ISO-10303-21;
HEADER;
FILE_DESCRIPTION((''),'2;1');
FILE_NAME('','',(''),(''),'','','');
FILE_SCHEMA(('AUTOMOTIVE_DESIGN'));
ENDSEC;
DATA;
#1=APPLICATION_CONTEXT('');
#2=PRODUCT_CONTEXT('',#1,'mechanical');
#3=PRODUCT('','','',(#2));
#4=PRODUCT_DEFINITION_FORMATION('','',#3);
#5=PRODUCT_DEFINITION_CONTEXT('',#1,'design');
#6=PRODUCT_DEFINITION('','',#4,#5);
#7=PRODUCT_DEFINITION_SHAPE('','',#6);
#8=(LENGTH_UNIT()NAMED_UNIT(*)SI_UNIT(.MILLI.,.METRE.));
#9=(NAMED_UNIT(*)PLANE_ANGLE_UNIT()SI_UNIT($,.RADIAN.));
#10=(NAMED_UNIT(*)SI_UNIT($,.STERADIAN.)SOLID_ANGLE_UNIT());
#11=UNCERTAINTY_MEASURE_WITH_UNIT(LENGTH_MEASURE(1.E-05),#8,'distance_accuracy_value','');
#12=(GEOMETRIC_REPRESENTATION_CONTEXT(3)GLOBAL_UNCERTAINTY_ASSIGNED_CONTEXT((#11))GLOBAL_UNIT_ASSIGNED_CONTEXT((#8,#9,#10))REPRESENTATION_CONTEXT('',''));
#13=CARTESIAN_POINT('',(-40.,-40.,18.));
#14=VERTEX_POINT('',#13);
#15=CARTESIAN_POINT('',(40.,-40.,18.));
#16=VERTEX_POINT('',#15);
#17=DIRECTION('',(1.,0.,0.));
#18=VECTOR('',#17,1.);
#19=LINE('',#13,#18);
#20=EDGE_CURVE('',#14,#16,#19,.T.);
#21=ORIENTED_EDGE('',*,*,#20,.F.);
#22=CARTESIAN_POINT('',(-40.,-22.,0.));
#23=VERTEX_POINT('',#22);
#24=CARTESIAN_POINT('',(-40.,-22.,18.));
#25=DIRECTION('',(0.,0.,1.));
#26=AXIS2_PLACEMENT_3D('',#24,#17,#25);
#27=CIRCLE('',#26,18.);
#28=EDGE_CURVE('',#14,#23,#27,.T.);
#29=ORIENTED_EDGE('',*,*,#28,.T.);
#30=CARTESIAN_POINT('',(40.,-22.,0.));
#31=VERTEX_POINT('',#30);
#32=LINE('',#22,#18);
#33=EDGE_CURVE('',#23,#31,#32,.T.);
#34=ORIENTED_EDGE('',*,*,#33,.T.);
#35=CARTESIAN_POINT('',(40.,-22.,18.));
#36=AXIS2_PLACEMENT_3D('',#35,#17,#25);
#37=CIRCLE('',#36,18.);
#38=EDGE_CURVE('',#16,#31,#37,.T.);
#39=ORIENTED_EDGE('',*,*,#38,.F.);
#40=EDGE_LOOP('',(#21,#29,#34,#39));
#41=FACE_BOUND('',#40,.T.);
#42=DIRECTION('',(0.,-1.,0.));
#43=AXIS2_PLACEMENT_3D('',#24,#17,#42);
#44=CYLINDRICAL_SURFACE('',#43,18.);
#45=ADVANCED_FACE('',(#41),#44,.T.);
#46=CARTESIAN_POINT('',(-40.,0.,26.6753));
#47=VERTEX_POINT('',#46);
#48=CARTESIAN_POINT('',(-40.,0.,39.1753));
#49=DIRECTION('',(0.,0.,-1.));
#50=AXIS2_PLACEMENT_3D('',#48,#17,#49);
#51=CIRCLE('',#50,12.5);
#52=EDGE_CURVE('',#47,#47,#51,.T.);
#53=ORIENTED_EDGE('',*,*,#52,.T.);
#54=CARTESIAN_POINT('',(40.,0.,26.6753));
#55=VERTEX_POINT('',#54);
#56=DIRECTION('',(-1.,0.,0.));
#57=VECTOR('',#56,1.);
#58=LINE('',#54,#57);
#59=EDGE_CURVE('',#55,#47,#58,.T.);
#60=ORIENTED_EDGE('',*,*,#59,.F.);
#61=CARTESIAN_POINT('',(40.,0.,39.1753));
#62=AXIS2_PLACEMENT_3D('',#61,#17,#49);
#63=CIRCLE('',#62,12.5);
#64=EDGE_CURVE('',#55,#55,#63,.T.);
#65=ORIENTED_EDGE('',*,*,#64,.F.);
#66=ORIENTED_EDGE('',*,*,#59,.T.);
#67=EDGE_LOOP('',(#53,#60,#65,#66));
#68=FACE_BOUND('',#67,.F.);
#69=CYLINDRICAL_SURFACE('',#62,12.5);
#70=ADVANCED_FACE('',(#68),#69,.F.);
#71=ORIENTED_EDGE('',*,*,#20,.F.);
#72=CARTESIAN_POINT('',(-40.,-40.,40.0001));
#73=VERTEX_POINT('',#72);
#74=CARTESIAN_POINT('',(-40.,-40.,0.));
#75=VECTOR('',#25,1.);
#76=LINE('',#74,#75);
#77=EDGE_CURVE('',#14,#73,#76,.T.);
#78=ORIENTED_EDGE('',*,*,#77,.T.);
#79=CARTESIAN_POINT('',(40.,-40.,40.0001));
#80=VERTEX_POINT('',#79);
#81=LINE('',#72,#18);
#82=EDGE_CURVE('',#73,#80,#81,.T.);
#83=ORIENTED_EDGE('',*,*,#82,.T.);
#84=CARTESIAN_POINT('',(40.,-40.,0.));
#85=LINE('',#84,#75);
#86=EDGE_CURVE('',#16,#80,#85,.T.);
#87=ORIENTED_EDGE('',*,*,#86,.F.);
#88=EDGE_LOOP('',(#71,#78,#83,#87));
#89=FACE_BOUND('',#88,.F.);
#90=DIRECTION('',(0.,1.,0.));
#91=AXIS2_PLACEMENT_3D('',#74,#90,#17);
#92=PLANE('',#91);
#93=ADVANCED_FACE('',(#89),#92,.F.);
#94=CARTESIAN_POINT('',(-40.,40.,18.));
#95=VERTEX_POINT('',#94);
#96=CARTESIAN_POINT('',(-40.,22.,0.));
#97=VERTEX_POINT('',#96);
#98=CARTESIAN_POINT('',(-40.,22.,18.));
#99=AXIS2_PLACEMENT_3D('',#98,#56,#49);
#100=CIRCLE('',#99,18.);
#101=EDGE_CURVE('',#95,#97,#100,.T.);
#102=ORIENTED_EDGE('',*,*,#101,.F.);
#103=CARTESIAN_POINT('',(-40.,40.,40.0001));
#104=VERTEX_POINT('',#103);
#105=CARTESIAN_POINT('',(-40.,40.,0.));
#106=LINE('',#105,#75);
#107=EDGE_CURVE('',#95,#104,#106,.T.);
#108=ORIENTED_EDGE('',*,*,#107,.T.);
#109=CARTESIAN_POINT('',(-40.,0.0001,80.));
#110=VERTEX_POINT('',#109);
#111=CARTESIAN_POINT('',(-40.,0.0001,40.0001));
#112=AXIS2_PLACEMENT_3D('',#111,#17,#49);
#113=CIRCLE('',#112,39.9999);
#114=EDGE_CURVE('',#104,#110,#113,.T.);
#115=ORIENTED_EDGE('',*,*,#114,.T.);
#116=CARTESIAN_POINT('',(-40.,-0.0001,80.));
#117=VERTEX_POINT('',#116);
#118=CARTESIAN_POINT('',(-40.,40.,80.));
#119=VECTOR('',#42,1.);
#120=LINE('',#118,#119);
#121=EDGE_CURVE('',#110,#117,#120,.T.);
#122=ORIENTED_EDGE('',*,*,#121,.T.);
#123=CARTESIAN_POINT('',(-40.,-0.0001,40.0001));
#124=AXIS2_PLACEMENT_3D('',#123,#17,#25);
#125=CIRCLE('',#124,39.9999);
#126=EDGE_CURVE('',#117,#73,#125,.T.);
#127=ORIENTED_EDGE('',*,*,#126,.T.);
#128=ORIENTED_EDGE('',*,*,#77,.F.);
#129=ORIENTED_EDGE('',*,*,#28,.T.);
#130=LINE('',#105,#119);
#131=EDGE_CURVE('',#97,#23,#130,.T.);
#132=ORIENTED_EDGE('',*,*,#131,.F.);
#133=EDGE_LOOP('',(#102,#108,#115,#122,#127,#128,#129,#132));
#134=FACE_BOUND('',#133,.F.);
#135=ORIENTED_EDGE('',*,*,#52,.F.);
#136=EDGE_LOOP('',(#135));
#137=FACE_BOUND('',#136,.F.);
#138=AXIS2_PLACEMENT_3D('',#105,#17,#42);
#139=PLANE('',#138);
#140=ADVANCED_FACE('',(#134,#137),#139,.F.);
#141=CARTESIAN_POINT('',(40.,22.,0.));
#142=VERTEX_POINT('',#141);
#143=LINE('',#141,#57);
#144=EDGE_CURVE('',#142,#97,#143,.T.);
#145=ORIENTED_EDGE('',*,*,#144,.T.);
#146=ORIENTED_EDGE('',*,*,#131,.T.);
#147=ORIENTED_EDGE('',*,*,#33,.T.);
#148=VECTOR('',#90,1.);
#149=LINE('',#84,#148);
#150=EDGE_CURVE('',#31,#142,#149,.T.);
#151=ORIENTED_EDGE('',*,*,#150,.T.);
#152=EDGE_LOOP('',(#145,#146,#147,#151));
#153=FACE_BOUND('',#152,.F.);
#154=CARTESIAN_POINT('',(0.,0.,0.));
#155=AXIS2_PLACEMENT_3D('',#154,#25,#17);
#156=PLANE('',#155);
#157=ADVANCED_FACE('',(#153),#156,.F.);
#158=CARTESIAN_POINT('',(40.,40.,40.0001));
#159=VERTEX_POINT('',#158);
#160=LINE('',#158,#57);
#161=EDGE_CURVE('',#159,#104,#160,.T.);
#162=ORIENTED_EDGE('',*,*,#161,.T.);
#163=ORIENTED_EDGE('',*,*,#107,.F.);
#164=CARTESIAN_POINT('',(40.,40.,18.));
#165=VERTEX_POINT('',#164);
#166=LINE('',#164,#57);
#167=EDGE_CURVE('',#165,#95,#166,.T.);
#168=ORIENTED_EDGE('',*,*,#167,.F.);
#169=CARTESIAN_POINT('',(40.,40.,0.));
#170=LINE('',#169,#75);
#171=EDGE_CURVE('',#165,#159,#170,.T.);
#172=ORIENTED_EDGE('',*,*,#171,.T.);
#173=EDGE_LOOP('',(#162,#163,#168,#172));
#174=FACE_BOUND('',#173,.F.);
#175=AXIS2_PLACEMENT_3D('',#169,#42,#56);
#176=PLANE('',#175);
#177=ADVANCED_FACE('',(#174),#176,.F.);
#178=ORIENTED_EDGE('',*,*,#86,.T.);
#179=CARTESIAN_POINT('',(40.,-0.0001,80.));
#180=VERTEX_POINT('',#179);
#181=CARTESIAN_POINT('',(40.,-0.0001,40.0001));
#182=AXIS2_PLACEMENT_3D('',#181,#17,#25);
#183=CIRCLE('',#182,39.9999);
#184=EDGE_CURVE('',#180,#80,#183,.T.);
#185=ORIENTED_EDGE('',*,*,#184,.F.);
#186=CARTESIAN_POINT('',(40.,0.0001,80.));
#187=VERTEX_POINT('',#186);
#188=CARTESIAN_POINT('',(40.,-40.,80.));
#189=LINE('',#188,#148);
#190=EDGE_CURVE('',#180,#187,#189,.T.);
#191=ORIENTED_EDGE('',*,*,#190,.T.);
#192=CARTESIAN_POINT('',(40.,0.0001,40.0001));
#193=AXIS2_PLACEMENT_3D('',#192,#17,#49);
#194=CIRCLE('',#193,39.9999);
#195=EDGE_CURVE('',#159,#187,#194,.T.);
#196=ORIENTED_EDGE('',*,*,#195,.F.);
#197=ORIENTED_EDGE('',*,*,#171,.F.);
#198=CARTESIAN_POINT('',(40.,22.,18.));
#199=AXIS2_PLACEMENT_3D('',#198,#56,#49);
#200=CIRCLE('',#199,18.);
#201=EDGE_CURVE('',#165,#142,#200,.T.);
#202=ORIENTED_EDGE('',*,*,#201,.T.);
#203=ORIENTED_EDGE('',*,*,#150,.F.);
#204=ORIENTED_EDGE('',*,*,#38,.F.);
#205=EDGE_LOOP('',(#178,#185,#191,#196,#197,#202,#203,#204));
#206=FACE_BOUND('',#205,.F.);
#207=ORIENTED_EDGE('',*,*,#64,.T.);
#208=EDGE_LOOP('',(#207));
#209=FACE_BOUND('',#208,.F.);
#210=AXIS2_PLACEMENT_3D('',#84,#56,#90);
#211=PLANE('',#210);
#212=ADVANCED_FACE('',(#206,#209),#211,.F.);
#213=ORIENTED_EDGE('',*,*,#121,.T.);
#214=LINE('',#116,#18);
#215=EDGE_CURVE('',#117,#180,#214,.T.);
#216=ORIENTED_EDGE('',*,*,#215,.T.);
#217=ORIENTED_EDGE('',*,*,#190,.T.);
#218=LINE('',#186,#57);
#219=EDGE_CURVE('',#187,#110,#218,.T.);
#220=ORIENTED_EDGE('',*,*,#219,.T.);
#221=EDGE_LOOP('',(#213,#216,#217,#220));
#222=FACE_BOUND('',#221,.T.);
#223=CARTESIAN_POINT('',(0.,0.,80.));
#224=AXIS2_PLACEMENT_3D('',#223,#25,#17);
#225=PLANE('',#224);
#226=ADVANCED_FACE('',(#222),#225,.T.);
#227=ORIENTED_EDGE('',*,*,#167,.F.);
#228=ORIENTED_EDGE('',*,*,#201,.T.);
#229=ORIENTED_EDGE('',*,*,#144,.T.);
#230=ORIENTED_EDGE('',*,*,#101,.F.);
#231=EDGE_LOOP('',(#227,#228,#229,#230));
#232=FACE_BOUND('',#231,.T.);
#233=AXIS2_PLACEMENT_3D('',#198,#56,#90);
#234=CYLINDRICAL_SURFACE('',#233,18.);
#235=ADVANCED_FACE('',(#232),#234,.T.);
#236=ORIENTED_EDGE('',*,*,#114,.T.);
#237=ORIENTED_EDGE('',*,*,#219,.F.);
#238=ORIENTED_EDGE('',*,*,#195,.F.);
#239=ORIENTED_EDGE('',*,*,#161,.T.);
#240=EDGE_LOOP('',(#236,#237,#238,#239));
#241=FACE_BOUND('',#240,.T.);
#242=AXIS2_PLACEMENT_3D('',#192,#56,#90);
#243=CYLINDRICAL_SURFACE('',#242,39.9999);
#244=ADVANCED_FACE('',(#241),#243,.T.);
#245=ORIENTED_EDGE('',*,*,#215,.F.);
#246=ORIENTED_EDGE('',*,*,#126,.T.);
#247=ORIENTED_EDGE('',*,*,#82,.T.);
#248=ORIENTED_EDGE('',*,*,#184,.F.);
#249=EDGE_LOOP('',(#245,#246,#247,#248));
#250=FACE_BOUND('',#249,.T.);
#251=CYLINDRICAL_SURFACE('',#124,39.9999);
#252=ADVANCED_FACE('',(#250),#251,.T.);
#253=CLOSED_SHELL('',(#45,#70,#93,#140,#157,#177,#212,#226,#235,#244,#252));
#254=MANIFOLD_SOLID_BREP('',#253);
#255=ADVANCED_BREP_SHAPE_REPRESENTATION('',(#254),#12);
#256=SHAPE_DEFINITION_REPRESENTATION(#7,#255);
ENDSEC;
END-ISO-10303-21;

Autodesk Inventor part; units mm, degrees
ref_plane "YZ Plane" through (0, 0, 0) normal (1, 0, 0) x (0, 1, 0)
ref_plane "XZ Plane" through (0, 0, 0) normal (0, 1, 0) x (-1, 0, 0)
ref_plane "XY Plane" through (0, 0, 0) normal (0, 0, 1) x (1, 0, 0)
sketch "Szkic3" plane through (0, 0, 0) normal (0, 0, 1) x (1, 0, 0)
  line L0 (-40, -40) -> (40, -40)
  line L1 (40, -40) -> (40, 40)
  line L2 (40, 40) -> (-40, 40)
  line L3 (-40, 40) -> (-40, -40)
  line L4 (-40, -40) -> (40, 40) construction
  line L5 (40, -40) -> (-40, 40) construction
  point P0 (0, 0)
  dimension "d8" = 80
  dimension "d9" = 80
extrude "Wyciągnięcie proste3" add sketch "Szkic3" along normal blind 80
fillet "Zaokrąglenie2" radius 18 2 edges at (0, 40, 0) (0, -40, 0)
fillet "Zaokrąglenie3" radius 40 2 edges at (0, 40, 80) (0, -40, 80)
sketch "Szkic4" plane through (40, -22, 0) normal (1, 0, 0) x (0, 0, -1)
  circle A0 centre (-39.1753, 22) radius 12.5
  point P0 (0, 22)
  dimension "d14" = 25
extrude "Wyciągnięcie proste4" cut sketch "Szkic4" against normal through all
properties part number "jakis_modulxD" material "Stal"
